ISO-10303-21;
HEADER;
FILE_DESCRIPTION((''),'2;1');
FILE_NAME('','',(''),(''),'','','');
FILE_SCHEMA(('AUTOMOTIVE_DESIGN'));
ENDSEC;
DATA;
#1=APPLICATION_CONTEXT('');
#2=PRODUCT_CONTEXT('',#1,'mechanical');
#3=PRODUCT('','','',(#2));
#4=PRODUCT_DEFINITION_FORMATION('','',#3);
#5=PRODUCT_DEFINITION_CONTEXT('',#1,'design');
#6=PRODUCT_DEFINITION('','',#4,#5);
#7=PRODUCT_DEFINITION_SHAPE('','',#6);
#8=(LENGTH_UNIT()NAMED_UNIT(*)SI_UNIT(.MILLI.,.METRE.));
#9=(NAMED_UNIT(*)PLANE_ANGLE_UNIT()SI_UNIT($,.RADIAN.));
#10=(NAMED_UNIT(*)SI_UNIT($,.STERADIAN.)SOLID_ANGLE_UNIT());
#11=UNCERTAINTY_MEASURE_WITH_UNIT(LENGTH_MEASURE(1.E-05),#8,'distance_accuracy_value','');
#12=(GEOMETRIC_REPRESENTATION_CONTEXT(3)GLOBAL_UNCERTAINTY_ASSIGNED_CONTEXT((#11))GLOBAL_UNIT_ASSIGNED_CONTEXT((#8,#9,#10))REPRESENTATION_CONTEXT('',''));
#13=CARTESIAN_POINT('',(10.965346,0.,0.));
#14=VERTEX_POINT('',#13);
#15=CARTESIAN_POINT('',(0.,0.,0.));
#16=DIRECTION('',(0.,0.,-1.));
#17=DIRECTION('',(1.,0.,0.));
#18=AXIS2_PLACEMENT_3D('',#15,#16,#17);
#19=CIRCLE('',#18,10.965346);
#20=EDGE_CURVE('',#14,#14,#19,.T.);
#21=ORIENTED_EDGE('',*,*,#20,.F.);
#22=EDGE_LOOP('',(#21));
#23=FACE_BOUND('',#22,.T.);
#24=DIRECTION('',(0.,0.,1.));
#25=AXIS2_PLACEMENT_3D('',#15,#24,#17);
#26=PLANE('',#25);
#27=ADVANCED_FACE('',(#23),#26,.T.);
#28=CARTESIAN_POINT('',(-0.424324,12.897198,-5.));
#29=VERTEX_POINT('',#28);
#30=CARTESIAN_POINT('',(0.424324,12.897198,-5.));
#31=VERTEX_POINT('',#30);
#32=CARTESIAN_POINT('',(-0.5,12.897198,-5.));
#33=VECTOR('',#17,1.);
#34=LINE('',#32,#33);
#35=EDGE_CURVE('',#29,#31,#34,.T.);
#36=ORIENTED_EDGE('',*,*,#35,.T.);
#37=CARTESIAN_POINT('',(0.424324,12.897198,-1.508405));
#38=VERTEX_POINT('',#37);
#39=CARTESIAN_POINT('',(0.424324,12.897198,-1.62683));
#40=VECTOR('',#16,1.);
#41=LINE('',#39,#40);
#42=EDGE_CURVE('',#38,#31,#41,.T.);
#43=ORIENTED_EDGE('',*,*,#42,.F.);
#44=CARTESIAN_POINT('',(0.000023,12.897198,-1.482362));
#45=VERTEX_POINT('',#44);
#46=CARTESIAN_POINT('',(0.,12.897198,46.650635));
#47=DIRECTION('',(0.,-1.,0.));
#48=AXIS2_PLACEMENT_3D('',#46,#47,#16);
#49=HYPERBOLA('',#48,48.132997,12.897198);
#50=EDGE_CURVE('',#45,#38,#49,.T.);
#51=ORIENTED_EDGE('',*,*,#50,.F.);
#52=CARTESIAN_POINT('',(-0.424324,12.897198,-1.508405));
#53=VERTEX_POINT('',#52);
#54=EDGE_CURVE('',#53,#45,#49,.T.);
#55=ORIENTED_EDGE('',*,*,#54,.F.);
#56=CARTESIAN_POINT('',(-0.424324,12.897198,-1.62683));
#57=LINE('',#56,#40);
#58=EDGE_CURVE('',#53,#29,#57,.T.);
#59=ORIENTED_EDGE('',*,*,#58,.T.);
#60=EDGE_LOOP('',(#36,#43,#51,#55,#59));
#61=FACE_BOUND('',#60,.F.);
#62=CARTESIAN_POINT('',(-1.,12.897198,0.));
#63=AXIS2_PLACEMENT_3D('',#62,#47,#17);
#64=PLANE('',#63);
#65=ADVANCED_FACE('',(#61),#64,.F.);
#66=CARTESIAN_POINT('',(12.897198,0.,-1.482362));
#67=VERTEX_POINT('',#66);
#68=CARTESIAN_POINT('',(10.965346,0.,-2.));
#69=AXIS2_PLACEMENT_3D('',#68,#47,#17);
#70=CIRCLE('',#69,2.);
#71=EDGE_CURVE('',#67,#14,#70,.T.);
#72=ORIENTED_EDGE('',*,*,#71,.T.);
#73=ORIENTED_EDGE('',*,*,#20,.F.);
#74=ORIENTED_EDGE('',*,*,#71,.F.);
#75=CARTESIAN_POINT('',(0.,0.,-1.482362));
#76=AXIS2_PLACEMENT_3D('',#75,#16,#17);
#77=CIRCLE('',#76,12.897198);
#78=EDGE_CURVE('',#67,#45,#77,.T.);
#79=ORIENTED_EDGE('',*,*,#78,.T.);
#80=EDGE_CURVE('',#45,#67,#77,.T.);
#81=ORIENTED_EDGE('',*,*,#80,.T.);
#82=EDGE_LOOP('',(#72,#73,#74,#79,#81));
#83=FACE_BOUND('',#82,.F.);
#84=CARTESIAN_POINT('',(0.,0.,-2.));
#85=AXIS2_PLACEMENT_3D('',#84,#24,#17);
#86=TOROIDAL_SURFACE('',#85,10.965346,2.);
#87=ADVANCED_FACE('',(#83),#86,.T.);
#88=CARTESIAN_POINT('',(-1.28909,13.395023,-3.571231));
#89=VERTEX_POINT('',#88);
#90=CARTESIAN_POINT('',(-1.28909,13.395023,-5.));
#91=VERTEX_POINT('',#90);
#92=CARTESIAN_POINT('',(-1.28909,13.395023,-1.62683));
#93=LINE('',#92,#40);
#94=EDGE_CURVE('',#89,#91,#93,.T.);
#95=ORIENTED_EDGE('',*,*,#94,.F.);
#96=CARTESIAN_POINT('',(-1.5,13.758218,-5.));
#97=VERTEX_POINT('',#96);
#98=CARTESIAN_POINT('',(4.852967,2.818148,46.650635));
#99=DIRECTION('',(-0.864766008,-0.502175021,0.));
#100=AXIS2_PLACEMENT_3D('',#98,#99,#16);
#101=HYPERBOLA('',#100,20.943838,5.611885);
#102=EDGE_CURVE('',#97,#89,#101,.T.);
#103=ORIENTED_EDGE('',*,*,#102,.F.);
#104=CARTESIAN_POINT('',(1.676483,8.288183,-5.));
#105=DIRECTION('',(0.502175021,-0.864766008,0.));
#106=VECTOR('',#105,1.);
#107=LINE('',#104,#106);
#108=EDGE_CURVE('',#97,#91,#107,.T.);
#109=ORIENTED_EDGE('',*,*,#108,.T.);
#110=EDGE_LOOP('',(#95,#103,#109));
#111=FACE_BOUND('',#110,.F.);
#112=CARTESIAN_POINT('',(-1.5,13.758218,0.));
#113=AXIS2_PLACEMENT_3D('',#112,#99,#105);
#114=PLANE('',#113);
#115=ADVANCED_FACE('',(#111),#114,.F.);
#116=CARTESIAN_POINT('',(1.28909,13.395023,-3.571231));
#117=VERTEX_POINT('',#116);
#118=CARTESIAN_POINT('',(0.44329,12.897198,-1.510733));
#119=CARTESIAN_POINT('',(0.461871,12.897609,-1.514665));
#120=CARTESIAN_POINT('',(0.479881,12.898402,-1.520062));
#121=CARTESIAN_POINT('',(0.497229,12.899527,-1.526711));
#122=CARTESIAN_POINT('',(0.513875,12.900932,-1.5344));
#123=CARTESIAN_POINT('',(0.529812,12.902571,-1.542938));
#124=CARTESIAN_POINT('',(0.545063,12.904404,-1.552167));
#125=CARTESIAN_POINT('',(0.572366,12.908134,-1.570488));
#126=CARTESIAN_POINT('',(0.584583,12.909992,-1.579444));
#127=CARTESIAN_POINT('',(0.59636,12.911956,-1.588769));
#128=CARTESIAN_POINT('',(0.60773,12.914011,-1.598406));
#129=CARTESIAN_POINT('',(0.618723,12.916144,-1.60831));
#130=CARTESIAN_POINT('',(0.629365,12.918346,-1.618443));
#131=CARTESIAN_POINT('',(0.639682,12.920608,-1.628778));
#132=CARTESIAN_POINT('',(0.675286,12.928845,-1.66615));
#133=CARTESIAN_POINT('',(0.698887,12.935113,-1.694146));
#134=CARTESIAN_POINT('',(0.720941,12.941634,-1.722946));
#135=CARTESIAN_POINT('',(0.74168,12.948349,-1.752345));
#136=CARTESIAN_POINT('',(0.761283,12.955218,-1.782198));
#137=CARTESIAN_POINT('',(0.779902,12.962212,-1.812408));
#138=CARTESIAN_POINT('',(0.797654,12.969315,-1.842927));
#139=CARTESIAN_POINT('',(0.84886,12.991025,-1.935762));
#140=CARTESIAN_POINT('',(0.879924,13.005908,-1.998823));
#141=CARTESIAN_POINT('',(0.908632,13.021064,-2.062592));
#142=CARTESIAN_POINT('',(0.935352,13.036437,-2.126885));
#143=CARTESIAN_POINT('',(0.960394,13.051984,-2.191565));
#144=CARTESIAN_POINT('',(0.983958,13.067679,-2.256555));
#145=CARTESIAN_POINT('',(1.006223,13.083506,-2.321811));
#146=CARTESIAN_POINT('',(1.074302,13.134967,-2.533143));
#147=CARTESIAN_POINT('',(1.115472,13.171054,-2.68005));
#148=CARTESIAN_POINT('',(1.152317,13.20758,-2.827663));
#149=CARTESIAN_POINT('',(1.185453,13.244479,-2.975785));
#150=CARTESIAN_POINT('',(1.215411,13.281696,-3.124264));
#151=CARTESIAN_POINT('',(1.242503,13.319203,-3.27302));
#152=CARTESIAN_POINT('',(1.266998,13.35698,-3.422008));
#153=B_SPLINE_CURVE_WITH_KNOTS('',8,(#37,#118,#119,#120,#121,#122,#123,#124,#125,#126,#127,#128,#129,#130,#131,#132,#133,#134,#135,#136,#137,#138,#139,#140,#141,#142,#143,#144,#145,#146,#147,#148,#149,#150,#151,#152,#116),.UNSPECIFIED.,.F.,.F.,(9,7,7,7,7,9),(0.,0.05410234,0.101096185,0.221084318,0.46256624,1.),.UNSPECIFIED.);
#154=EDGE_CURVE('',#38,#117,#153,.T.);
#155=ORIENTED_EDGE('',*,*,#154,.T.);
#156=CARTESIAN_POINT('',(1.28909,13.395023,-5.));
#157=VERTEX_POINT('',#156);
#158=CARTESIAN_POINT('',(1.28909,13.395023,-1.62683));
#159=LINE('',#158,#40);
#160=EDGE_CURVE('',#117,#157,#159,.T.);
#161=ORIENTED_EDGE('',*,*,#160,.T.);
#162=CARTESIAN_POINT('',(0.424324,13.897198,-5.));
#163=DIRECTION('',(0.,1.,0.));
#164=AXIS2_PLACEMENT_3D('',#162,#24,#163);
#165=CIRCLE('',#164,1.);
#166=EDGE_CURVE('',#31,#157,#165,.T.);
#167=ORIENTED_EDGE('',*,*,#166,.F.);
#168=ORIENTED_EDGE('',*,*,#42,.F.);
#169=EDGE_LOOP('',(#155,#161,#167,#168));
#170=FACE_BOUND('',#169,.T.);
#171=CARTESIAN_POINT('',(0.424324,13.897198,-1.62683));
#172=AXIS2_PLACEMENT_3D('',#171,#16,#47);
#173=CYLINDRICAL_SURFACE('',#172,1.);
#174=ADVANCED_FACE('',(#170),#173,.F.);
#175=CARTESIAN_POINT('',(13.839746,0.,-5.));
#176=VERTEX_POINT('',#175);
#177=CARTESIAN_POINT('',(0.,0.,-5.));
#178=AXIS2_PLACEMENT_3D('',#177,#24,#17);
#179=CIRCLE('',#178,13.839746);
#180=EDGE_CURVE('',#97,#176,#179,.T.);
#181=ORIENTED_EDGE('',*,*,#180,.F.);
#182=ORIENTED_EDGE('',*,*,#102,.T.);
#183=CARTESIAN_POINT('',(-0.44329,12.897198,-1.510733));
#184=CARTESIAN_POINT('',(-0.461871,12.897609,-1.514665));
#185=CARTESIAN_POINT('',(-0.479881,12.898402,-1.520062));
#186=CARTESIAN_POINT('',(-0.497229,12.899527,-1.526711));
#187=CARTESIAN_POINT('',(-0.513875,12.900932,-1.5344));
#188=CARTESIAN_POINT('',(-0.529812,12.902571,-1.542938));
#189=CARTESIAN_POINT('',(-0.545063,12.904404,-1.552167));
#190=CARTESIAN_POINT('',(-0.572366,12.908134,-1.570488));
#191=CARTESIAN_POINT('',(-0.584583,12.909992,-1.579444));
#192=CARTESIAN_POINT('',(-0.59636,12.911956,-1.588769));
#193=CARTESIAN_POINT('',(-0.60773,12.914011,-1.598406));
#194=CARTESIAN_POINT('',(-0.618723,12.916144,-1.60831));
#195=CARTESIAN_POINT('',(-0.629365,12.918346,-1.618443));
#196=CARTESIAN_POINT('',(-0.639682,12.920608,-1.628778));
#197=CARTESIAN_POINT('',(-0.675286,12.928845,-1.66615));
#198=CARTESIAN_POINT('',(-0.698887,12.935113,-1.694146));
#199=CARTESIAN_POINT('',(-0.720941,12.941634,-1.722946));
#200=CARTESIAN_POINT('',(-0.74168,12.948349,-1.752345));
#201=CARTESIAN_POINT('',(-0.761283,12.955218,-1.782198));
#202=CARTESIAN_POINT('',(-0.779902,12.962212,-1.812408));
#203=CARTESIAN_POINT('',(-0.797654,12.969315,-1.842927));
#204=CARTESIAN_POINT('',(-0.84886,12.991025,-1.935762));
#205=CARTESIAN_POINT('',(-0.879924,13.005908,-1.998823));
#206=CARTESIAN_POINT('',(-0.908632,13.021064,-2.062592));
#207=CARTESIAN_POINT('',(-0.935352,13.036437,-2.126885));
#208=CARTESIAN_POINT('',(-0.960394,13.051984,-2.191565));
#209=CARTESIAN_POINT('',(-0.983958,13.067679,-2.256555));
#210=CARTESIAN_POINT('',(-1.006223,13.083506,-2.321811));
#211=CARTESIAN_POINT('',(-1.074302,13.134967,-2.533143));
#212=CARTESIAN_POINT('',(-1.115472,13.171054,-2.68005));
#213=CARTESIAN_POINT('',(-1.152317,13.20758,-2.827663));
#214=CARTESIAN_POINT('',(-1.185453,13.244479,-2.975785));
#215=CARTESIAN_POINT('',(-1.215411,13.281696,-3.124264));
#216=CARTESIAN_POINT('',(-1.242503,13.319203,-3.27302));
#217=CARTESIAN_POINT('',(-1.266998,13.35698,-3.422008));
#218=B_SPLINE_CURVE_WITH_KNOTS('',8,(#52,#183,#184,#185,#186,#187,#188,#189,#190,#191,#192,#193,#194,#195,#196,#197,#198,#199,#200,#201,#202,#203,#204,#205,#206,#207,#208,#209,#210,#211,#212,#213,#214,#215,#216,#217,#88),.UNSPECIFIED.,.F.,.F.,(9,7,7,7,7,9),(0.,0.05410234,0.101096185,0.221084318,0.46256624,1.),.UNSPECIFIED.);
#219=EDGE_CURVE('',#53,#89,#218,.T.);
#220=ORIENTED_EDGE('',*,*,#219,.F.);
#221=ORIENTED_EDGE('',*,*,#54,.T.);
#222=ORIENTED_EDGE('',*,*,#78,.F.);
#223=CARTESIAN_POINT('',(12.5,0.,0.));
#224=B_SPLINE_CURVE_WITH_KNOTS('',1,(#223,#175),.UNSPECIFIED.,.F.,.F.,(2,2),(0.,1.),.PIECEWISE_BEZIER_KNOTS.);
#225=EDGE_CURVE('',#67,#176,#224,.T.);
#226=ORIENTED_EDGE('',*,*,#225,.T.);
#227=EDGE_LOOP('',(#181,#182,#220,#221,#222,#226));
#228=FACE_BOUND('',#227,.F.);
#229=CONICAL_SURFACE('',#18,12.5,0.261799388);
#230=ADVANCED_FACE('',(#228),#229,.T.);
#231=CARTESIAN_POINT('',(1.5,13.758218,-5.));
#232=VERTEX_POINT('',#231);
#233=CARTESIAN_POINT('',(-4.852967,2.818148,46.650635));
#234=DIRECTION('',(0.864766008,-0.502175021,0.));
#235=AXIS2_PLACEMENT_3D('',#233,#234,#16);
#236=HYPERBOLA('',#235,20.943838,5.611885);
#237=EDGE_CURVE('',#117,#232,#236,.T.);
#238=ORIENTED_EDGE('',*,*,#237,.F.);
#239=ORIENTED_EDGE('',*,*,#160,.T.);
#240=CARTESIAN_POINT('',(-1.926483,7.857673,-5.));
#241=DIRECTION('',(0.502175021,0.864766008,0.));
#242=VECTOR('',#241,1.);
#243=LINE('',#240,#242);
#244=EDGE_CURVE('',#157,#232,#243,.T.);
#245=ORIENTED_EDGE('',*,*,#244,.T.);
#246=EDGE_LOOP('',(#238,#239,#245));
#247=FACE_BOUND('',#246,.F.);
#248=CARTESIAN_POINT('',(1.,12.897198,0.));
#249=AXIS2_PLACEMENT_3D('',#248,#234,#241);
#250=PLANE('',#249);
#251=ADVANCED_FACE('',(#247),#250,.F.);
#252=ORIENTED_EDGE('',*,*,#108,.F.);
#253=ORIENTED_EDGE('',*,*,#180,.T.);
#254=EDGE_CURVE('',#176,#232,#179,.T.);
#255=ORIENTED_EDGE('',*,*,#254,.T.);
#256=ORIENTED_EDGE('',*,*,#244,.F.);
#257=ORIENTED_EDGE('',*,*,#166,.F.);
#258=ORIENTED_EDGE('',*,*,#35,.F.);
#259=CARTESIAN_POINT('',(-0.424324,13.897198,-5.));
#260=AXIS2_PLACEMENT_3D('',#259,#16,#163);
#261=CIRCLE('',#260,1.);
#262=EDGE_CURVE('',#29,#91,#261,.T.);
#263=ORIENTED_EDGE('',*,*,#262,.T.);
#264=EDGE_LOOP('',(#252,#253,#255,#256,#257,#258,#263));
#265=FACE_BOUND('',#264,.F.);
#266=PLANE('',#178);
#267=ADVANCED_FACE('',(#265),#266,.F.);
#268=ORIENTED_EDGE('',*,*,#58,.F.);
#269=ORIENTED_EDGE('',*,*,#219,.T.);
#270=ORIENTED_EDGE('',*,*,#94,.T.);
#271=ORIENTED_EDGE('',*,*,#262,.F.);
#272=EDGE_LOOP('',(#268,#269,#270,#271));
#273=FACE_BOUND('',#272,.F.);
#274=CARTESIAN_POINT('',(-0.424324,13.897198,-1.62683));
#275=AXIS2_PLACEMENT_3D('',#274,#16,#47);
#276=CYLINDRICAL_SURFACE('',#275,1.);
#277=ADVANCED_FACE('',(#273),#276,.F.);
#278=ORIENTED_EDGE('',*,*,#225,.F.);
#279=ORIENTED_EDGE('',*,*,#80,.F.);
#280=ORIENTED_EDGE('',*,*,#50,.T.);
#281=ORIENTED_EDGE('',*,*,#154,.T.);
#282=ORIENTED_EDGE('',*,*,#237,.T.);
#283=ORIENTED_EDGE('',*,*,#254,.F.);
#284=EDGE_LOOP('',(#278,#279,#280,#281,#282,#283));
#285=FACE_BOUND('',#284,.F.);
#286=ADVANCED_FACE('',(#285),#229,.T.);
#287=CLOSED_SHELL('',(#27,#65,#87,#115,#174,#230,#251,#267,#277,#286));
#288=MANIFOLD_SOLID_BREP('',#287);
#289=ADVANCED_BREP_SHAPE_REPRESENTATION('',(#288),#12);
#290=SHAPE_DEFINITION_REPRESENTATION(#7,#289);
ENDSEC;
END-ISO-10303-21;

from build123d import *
from build123d import SkipClean  # not in build123d's __all__

# Parameters (mm, degrees)
F0_R     = 12.5
F1_DEPTH = 5
F1_TAPER = -15
F2_R     = 2
F4_DEPTH = 25
F5_R     = 1


with BuildPart() as f1:
    # F0 (on Top) → F1 (new body)
    with BuildSketch(Plane.XY):
        Circle(F0_R)
    extrude(amount=-F1_DEPTH, taper=F1_TAPER)

    # F2
    f2_edges = [f1.edges().sort_by_distance(p)[0] for p in [
        (-12.5, 0, 0),
    ]]
    fillet(f2_edges, radius=F2_R)

    # F3 (on Top) → F4 (cut)
    with BuildSketch(Plane.XY):
        with BuildLine():
            ThreePointArc((1.5, 13.7582182094), (0, 13.8397459622), (-1.5, 13.7582182094))
            Line((-1.5, 13.7582182094), (-1, 12.8971976766))
            Line((-1, 12.8971976766), (1, 12.8971976766))
            Line((1, 12.8971976766), (1.5, 13.7582182094))
        make_face()
    with SkipClean():  # cleaning this boolean's faces spoils the solid; the shape is the same uncleaned
        extrude(amount=-F4_DEPTH, mode=Mode.SUBTRACT)

    # F5
    f5_edges = [f1.edges().sort_by_distance(p)[0] for p in [
        (-1, 12.897198, -3.313415),
        (1, 12.897198, -3.313415),
    ]]
    fillet(f5_edges, radius=F5_R)


solid = f1.part
